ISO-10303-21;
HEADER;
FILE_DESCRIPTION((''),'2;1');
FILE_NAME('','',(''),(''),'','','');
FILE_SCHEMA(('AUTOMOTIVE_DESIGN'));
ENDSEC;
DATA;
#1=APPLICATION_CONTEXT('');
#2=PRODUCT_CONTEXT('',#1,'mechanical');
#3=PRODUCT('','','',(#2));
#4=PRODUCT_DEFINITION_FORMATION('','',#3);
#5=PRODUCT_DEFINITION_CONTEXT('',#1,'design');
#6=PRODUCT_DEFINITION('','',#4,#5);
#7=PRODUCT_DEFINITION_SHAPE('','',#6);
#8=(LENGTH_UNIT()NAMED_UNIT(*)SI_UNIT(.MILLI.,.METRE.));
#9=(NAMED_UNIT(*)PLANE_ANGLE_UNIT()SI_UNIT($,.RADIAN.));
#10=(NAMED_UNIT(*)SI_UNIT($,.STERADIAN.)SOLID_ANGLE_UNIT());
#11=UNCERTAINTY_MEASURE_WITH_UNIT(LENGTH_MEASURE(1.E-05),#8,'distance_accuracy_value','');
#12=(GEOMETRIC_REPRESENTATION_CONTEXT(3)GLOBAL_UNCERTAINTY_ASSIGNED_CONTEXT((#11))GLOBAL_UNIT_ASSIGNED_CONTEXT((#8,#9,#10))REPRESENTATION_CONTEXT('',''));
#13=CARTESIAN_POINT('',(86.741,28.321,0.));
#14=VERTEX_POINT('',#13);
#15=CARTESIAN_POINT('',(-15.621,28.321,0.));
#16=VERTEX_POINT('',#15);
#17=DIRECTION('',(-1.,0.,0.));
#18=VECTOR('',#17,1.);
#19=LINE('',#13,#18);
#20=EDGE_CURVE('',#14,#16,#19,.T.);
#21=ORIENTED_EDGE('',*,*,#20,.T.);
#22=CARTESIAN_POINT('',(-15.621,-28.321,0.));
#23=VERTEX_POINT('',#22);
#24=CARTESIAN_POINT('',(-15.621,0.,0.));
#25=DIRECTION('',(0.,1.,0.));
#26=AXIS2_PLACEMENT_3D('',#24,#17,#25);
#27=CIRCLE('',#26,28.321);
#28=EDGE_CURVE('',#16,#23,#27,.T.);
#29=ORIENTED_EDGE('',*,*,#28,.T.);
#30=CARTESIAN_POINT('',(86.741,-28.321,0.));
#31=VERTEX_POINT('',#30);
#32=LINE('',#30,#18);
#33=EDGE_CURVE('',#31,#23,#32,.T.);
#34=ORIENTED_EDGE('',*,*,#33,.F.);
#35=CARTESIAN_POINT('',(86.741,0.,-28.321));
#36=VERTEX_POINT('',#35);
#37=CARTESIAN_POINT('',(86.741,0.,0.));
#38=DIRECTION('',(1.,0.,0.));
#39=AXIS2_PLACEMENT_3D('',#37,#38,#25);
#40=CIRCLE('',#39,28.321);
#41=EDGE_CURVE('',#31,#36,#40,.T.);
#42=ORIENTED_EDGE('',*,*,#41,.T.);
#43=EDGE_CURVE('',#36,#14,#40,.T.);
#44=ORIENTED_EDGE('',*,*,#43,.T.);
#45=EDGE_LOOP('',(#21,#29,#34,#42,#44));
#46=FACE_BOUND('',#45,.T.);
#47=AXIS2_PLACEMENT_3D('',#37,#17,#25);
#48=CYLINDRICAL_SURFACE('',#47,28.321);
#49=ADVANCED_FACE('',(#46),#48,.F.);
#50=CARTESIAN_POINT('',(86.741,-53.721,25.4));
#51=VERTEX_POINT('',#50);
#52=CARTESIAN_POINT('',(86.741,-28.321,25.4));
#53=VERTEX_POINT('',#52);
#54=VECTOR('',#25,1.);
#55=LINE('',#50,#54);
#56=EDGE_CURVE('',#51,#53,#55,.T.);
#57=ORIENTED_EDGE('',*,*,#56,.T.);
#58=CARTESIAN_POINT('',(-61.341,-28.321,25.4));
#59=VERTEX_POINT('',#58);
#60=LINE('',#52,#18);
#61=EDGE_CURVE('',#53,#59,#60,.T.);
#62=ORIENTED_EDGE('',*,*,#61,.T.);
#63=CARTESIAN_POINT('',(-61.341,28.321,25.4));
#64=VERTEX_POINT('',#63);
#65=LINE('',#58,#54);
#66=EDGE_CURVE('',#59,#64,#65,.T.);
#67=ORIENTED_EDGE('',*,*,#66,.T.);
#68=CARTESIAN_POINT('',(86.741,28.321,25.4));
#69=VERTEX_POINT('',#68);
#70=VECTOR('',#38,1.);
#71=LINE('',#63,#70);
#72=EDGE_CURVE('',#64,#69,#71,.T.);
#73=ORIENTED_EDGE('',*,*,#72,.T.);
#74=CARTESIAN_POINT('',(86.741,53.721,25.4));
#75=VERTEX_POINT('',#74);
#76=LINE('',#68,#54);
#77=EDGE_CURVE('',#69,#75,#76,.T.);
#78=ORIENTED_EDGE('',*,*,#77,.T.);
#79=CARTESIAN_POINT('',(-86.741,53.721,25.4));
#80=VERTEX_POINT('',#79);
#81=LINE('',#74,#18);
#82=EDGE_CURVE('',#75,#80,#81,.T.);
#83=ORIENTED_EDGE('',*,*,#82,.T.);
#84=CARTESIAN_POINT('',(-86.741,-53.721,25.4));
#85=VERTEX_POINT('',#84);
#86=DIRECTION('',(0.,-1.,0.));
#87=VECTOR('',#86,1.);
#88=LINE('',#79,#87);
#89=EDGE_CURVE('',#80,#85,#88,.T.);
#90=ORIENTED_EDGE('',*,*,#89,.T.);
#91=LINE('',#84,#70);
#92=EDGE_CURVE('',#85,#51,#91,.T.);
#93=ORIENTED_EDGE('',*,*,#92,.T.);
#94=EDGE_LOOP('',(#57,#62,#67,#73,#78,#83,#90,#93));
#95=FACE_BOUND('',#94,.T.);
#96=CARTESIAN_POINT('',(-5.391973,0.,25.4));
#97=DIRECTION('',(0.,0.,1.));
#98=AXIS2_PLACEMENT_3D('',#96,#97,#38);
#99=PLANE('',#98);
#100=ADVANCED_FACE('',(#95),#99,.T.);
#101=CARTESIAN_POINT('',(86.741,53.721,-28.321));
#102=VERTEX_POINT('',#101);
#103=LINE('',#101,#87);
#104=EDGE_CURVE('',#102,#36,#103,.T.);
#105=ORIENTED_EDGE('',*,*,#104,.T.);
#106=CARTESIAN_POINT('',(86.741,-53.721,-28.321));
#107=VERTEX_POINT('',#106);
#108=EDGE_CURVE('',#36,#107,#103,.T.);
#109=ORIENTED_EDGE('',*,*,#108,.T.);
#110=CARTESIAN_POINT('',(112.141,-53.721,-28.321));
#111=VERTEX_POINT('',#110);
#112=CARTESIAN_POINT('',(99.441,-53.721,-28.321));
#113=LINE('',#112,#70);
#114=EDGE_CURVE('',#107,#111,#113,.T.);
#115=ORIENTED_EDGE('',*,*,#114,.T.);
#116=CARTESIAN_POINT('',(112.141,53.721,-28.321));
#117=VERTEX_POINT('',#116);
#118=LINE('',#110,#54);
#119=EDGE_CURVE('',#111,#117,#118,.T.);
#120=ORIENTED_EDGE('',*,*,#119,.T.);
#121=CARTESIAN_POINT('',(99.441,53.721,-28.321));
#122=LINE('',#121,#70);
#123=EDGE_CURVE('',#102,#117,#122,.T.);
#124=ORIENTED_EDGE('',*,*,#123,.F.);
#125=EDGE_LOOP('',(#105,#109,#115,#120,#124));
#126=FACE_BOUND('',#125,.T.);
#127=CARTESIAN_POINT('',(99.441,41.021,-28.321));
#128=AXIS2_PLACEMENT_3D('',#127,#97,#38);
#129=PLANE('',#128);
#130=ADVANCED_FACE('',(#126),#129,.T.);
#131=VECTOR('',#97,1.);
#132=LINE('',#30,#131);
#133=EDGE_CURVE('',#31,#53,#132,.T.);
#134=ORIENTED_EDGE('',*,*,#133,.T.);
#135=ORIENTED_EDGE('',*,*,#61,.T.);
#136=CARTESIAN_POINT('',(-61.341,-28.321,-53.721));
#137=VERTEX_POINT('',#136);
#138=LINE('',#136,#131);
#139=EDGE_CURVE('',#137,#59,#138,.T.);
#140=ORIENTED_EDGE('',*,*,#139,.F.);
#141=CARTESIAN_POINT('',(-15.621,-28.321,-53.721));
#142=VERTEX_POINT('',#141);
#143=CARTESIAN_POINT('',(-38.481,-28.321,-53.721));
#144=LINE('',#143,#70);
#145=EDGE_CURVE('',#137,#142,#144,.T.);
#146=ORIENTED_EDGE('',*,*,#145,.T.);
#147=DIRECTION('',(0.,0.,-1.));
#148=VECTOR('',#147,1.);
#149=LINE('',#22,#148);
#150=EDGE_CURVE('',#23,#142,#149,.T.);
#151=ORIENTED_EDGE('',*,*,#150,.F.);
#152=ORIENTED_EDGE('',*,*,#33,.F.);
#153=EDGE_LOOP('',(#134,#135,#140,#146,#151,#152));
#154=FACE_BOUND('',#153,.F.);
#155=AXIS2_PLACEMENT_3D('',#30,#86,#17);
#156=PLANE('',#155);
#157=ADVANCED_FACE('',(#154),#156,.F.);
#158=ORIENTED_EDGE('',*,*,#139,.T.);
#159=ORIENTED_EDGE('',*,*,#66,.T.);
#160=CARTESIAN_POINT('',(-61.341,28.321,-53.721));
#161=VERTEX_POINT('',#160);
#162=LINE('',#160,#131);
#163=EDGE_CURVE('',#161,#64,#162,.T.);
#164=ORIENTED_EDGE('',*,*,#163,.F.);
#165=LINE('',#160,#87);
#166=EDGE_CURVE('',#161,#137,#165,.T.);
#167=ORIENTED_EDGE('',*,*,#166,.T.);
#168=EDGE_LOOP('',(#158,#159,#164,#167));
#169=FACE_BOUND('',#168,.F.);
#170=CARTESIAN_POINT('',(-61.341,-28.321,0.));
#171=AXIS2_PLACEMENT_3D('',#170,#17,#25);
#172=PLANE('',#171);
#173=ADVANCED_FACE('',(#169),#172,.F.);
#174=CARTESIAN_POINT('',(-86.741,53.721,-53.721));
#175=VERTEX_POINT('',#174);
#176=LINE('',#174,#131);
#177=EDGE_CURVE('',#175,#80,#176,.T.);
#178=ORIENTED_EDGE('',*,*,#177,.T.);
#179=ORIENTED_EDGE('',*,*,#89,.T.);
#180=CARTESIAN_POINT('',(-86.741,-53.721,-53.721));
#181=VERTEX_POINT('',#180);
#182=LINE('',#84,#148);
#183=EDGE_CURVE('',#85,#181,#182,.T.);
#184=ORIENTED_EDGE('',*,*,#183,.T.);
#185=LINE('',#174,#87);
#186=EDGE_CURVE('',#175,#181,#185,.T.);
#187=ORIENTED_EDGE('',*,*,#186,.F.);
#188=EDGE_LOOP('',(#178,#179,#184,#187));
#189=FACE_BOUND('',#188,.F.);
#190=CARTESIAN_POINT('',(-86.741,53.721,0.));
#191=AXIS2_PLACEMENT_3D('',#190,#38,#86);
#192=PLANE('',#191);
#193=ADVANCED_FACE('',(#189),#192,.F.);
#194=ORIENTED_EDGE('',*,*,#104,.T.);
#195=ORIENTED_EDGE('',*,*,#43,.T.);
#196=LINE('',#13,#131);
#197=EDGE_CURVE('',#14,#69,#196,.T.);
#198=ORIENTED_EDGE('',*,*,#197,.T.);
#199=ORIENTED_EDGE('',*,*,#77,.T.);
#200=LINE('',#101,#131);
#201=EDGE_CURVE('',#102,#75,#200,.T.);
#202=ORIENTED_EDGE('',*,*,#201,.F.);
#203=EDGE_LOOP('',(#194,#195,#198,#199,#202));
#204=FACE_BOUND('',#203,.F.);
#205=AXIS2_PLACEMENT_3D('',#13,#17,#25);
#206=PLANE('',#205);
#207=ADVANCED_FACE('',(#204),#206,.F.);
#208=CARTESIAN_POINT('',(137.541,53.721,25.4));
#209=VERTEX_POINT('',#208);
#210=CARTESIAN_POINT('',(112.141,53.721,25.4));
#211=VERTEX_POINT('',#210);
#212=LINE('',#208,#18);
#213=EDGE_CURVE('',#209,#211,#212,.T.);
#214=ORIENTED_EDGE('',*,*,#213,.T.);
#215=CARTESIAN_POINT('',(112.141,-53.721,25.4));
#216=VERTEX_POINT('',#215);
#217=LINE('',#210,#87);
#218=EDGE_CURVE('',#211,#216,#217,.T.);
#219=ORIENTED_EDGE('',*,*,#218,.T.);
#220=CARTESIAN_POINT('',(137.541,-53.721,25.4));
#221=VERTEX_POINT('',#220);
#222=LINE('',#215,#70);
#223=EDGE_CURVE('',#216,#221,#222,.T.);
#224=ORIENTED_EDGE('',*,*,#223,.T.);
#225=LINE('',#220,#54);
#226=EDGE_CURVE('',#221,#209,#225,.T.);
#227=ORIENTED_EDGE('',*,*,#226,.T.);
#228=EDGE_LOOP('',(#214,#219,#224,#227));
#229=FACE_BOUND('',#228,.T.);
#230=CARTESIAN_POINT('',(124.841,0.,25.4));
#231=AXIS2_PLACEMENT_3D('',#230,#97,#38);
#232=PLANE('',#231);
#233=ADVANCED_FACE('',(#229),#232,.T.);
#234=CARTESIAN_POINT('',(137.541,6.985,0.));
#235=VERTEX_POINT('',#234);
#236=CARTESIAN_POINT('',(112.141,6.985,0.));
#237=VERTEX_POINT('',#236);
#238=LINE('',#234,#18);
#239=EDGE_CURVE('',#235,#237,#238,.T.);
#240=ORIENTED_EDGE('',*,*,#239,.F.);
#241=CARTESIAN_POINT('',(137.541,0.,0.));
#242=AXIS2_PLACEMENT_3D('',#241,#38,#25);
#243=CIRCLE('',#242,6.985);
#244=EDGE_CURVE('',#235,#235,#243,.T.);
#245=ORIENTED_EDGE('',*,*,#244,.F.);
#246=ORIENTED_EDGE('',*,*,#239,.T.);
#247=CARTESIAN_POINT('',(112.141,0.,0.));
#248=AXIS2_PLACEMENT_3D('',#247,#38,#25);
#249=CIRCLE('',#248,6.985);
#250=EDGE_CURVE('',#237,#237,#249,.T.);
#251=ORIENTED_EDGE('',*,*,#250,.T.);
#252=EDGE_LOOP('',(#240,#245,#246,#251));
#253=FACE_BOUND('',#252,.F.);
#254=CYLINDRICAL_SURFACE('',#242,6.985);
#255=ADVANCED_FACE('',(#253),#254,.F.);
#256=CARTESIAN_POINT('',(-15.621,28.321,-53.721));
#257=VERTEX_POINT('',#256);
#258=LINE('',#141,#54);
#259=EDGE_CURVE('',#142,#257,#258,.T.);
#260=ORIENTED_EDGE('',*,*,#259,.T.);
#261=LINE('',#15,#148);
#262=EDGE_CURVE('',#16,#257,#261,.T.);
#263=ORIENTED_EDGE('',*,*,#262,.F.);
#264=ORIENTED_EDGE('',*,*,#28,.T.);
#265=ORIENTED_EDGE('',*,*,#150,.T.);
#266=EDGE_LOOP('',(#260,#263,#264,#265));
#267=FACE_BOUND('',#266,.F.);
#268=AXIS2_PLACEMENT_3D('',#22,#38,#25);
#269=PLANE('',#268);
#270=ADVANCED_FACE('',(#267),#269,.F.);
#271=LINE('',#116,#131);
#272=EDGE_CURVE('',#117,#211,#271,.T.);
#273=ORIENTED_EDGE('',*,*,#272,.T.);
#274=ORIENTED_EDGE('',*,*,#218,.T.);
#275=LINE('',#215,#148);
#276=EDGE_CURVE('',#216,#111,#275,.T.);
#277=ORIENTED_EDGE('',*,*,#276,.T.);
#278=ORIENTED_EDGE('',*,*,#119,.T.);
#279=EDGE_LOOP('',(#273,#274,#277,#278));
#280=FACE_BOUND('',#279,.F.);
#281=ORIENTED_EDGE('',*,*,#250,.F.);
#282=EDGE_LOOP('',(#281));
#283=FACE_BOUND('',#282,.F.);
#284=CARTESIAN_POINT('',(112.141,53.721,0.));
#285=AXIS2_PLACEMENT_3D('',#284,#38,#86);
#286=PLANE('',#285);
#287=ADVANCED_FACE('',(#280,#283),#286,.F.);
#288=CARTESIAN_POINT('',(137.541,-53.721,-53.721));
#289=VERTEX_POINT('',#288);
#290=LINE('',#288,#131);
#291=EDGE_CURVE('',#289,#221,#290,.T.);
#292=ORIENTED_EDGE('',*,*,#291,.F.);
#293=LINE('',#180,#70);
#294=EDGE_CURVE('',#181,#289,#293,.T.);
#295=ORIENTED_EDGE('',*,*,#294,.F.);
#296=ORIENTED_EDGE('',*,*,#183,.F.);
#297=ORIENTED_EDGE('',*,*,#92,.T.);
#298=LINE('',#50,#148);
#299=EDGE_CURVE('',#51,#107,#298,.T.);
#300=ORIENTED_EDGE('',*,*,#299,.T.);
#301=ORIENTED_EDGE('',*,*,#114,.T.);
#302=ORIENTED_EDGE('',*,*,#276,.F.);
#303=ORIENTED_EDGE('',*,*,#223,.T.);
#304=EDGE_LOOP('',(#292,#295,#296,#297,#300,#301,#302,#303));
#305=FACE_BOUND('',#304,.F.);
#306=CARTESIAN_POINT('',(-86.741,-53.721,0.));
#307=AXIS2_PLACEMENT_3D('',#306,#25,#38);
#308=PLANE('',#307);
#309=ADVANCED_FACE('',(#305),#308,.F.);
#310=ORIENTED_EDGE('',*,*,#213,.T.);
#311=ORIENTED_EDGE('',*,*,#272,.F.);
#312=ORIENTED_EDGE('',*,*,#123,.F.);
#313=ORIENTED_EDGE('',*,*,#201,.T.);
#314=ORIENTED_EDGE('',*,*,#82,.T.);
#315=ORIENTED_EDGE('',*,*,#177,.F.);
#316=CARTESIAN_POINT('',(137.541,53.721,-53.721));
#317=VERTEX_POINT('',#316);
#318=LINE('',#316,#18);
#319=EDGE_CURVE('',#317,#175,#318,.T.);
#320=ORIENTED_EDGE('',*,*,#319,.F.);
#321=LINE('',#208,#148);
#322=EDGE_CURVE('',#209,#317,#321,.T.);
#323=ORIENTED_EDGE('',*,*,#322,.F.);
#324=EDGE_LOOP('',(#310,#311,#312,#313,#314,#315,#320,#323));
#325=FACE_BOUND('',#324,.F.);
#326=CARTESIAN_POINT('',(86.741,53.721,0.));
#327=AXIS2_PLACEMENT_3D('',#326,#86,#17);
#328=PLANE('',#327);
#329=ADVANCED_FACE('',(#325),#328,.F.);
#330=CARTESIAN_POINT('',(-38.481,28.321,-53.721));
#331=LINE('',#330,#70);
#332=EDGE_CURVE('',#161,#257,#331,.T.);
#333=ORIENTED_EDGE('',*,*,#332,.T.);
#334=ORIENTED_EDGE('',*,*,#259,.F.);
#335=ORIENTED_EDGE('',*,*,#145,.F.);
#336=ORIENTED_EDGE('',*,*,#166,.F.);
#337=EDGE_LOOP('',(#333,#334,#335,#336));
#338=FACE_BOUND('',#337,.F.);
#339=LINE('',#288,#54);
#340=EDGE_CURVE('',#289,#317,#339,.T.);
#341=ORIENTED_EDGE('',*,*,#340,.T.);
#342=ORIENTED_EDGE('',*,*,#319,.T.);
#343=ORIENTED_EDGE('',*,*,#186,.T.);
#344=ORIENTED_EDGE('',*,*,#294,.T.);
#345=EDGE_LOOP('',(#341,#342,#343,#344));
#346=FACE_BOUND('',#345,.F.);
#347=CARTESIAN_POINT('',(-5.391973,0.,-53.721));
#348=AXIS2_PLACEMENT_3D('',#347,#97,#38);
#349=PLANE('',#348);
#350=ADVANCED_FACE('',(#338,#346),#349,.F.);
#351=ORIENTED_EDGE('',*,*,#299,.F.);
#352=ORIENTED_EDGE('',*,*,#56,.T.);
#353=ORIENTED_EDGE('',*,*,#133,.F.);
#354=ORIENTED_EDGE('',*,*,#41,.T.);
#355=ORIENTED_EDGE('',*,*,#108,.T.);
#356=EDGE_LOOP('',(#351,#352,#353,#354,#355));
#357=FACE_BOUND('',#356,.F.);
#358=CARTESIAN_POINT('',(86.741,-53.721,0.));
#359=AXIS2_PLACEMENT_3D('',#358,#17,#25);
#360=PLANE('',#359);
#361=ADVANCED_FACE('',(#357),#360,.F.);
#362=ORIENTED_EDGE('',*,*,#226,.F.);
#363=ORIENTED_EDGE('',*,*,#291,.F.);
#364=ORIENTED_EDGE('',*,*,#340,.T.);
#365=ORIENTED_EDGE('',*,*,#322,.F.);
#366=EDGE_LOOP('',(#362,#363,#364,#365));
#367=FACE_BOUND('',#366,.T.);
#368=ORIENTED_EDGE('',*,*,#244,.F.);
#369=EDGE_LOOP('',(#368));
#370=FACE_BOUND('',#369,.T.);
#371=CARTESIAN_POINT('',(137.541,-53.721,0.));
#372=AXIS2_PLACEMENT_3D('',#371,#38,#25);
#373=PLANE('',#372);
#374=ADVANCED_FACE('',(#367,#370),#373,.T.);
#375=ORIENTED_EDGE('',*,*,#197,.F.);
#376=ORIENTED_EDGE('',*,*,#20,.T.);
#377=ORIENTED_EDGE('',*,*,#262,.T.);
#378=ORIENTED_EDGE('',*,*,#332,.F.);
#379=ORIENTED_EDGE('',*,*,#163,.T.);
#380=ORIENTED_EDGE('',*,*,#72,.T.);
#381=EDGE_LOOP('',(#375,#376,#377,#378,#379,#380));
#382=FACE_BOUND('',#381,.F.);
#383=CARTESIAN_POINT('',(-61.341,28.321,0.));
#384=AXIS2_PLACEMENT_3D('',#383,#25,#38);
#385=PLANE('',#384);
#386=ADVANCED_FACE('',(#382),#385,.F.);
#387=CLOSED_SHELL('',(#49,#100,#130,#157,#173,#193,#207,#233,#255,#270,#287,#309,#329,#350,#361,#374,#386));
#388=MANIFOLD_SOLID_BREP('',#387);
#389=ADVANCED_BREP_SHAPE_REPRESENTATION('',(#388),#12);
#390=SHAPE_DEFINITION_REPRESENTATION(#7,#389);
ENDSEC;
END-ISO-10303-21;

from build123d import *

# Parameters (mm, degrees)
F0_W     = 76.962
F0_H     = 28.321
F0_W_2   = 45.72
F0_W_3   = 25.4
F0_H_2   = 25.4
F1_DEPTH = 53.721
F3_DEPTH = 25.4
F4_DEPTH = 53.721
F5_R     = 6.985
F6_DEPTH = 25.4
F7_DEPTH = 28.321


with BuildPart() as f1:
    # F0 (on Top) → F1 (new body)
    with BuildSketch(Plane.XY):
        Polygon((86.741, -28.321), (61.341, -28.321), (-15.621, -28.321), (-61.341, -28.321), (-61.341, 0), (-61.341, 28.321), (-15.621, 28.321), (61.341, 28.321), (86.741, 28.321), (86.741, 53.721), (-86.741, 53.721), (-86.741, -53.721), (86.741, -53.721), align=None)
        with Locations((22.86, -14.1605)):
            Rectangle(F0_W, F0_H)
        with Locations((-38.481, -14.1605)):
            Rectangle(F0_W_2, F0_H)
        with Locations((74.041, -14.1605)):
            Rectangle(F0_W_3, F0_H)
        with Locations((74.041, 14.1605)):
            Rectangle(F0_W_3, F0_H)
        with Locations((22.86, 14.1605)):
            Rectangle(F0_W, F0_H)
        with Locations((-38.481, 14.1605)):
            Rectangle(F0_W_2, F0_H)
        Polygon((112.141, 0), (112.141, -28.321), (112.141, -53.721), (137.541, -53.721), (137.541, 53.721), (112.141, 53.721), (112.141, 28.321), align=None)
        with Locations((99.441, 41.021)):
            Rectangle(F0_W_3, F0_H_2)
        with Locations((99.441, -41.021)):
            Rectangle(F0_W_3, F0_H_2)
        with Locations((99.441, -14.1605)):
            Rectangle(F0_W_3, F0_H)
        with Locations((99.441, 14.1605)):
            Rectangle(F0_W_3, F0_H)
    extrude(amount=-F1_DEPTH)

    # F0 (on Top) → F2 (revolve, cut)
    with BuildSketch(Plane.XY):
        with Locations((74.041, 14.1605)):
            Rectangle(F0_W_3, F0_H)
        with Locations((-38.481, 14.1605)):
            Rectangle(F0_W_2, F0_H)
        with Locations((22.86, 14.1605)):
            Rectangle(F0_W, F0_H)
    revolve(axis=Axis((0, 0, 0), (1, 0, 0)), mode=Mode.SUBTRACT)

    # F0 (on Top) → F3 (join)
    with BuildSketch(Plane.XY):
        Polygon((86.741, -28.321), (61.341, -28.321), (-15.621, -28.321), (-61.341, -28.321), (-61.341, 0), (-61.341, 28.321), (-15.621, 28.321), (61.341, 28.321), (86.741, 28.321), (86.741, 53.721), (-86.741, 53.721), (-86.741, -53.721), (86.741, -53.721), align=None)
        Polygon((112.141, 0), (112.141, -28.321), (112.141, -53.721), (137.541, -53.721), (137.541, 53.721), (112.141, 53.721), (112.141, 28.321), align=None)
    extrude(amount=F3_DEPTH)

    # F0 (on Top) → F4 (cut)
    with BuildSketch(Plane.XY):
        with Locations((-38.481, 14.1605)):
            Rectangle(F0_W_2, F0_H)
        with Locations((-38.481, -14.1605)):
            Rectangle(F0_W_2, F0_H)
    extrude(amount=-F4_DEPTH, mode=Mode.SUBTRACT)

    # F5 (on face) → F6 (cut)
    with BuildSketch(Plane.YZ.offset(137.541)):
        Circle(F5_R)
    extrude(amount=-F6_DEPTH, mode=Mode.SUBTRACT)

    # F0 (on Top) → F7 (cut)
    with BuildSketch(Plane.XY):
        with Locations((99.441, 41.021)):
            Rectangle(F0_W_3, F0_H_2)
        with Locations((99.441, 14.1605)):
            Rectangle(F0_W_3, F0_H)
        with Locations((99.441, -14.1605)):
            Rectangle(F0_W_3, F0_H)
        with Locations((99.441, -41.021)):
            Rectangle(F0_W_3, F0_H_2)
    extrude(amount=-F7_DEPTH, mode=Mode.SUBTRACT)


solid = f1.part
